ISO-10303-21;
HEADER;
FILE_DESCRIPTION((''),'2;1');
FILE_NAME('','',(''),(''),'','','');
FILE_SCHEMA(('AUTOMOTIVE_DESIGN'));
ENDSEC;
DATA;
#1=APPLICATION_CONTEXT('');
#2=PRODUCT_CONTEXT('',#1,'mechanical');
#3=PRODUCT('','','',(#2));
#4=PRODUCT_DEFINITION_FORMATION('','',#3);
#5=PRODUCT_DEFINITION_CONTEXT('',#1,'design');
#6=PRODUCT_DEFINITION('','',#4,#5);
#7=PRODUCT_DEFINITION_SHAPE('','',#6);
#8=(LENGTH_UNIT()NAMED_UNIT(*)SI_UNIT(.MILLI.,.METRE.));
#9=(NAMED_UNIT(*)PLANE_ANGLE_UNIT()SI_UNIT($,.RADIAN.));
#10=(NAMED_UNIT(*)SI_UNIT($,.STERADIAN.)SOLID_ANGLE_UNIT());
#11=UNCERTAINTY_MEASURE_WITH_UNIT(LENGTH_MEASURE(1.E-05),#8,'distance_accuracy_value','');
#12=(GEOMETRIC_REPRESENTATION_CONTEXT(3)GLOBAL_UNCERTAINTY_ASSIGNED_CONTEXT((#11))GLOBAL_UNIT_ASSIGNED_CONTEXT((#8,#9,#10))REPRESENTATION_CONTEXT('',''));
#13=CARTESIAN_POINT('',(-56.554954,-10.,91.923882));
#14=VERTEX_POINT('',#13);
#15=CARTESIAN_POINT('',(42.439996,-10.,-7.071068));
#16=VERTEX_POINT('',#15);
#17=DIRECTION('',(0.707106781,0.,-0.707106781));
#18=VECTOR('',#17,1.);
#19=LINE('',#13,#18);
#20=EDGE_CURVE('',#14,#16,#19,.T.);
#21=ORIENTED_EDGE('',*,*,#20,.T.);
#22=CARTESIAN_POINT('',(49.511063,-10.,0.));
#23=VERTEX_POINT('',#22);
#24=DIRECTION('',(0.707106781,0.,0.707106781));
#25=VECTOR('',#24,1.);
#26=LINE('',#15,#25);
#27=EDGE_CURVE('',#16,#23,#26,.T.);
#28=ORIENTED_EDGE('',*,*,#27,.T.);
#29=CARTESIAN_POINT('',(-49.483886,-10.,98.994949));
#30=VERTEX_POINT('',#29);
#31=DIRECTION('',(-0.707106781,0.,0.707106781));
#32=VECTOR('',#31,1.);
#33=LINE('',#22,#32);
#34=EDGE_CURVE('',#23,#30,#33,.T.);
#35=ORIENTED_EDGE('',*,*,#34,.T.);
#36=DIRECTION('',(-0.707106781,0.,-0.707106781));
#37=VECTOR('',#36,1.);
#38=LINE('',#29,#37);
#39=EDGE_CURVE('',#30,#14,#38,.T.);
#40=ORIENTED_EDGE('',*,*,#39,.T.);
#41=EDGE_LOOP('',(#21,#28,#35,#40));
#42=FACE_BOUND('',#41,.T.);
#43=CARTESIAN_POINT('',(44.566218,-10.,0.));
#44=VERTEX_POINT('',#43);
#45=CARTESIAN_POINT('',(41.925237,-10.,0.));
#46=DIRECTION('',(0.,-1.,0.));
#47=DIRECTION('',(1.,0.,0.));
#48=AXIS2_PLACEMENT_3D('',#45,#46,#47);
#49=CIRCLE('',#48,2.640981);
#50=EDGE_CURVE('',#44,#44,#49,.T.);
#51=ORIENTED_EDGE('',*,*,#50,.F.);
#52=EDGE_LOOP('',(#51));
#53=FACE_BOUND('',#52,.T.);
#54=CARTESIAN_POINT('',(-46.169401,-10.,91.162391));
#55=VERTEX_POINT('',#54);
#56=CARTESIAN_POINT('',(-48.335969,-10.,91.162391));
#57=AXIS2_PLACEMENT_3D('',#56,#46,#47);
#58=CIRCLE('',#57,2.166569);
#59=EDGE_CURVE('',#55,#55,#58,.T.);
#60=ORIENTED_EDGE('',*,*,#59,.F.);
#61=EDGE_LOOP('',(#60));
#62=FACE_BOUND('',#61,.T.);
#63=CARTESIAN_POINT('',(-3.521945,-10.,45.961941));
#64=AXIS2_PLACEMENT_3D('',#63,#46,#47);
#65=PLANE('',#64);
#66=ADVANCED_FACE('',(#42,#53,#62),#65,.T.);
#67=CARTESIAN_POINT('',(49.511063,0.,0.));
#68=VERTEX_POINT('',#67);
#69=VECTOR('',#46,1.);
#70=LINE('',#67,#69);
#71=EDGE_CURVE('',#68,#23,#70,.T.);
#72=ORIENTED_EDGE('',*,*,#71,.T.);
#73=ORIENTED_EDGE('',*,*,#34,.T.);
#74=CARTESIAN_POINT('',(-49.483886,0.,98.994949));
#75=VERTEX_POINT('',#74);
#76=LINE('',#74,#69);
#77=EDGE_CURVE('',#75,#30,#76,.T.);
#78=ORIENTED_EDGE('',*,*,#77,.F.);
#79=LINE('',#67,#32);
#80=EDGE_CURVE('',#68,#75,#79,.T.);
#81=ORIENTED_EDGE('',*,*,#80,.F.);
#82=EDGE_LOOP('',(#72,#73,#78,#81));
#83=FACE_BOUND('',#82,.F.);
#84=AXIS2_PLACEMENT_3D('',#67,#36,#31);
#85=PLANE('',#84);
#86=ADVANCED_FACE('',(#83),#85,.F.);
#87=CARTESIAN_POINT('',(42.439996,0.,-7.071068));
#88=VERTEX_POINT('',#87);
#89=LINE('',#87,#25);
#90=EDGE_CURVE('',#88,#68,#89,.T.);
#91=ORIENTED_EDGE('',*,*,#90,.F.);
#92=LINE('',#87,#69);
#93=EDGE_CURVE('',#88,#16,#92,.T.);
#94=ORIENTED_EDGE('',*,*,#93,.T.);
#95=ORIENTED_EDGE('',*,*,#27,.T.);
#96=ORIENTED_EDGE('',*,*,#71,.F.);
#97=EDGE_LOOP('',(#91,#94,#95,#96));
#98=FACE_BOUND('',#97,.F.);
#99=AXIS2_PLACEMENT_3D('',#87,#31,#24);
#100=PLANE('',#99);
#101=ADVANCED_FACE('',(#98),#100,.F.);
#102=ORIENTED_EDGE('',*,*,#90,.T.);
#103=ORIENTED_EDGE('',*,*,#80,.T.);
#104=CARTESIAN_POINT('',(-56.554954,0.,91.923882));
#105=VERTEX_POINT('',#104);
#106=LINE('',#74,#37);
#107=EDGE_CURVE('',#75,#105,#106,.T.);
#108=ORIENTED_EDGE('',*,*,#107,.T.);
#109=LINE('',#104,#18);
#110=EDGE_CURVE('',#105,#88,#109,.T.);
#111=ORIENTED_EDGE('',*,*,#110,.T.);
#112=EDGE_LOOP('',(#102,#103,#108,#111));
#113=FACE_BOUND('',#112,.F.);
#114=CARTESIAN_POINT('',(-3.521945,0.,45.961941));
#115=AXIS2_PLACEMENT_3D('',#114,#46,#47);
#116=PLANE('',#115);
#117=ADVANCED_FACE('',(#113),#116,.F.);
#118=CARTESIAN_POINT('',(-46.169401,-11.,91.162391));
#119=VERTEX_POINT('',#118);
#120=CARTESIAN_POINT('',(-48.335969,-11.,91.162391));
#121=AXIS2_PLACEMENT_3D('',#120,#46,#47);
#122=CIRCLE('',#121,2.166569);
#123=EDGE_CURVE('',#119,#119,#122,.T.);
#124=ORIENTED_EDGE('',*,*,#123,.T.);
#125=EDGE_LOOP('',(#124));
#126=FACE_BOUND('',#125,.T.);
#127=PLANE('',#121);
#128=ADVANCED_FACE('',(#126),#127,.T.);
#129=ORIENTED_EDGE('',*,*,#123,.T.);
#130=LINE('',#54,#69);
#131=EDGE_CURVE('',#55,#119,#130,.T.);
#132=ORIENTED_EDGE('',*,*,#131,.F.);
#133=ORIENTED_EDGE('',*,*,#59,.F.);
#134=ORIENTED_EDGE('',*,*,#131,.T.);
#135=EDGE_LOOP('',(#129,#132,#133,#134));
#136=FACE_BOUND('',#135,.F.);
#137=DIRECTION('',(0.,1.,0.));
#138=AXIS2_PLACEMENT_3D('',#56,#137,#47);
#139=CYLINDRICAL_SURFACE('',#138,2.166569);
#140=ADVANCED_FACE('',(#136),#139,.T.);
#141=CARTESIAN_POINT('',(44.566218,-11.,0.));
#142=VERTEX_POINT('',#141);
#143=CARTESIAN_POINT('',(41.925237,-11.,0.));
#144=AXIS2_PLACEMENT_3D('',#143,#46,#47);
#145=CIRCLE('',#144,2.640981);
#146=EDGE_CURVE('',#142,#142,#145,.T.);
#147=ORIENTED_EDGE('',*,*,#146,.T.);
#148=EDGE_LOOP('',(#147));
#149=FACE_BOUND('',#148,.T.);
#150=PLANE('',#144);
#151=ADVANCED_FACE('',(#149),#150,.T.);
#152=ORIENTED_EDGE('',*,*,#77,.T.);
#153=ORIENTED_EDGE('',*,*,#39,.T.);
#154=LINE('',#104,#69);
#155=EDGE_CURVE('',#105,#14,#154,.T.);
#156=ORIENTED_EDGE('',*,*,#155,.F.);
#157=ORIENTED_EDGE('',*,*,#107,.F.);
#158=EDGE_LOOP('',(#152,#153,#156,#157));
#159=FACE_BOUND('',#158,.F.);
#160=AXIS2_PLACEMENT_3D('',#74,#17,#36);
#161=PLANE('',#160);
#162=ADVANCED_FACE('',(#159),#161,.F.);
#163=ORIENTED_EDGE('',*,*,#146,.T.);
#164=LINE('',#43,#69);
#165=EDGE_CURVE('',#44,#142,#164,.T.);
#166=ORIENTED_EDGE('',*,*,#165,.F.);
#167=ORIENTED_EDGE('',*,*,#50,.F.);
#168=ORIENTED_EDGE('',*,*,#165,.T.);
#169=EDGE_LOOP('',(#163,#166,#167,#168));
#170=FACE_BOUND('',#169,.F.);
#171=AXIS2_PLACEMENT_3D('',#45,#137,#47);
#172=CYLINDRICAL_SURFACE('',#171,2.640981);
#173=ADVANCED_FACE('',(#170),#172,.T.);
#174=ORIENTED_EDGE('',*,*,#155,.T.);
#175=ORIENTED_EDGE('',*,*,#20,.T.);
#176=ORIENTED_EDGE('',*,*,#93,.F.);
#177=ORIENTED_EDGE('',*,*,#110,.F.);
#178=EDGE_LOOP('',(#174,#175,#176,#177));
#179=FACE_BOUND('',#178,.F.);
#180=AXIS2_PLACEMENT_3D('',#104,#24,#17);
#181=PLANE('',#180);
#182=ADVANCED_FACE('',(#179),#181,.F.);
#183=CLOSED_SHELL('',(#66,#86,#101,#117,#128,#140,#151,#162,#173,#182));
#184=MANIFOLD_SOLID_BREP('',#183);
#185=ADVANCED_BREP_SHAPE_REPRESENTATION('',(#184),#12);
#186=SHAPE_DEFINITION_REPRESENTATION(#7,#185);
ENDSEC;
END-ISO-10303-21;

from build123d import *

# Parameters (mm, degrees)
F1_DEPTH = 10
F2_R     = 2.6409813422
F2_R_2   = 2.1665688489
F3_DEPTH = 1


# Not quite as in the source:
# - a feature names something its author has since deleted; it is built from what else it names


with BuildPart() as f1:
    # F0 (on Front) → F1 (new body)
    with BuildSketch(Plane.XZ):
        Polygon((-49.4838858729, 98.9949493661), (-56.5549536848, 91.9238815543), (42.4399956814, -7.0710678119), (49.5110634932, 0), align=None)
    extrude(amount=F1_DEPTH)

    # F2 (on face) → F3 (join)
    with BuildSketch(Plane.XZ.offset(10)):
        with Locations((41.9252365828, 0)):
            Circle(F2_R)
        with Locations((-48.3359694481, 91.1623910069)):
            Circle(F2_R_2)
    extrude(amount=F3_DEPTH)


solid = f1.part
